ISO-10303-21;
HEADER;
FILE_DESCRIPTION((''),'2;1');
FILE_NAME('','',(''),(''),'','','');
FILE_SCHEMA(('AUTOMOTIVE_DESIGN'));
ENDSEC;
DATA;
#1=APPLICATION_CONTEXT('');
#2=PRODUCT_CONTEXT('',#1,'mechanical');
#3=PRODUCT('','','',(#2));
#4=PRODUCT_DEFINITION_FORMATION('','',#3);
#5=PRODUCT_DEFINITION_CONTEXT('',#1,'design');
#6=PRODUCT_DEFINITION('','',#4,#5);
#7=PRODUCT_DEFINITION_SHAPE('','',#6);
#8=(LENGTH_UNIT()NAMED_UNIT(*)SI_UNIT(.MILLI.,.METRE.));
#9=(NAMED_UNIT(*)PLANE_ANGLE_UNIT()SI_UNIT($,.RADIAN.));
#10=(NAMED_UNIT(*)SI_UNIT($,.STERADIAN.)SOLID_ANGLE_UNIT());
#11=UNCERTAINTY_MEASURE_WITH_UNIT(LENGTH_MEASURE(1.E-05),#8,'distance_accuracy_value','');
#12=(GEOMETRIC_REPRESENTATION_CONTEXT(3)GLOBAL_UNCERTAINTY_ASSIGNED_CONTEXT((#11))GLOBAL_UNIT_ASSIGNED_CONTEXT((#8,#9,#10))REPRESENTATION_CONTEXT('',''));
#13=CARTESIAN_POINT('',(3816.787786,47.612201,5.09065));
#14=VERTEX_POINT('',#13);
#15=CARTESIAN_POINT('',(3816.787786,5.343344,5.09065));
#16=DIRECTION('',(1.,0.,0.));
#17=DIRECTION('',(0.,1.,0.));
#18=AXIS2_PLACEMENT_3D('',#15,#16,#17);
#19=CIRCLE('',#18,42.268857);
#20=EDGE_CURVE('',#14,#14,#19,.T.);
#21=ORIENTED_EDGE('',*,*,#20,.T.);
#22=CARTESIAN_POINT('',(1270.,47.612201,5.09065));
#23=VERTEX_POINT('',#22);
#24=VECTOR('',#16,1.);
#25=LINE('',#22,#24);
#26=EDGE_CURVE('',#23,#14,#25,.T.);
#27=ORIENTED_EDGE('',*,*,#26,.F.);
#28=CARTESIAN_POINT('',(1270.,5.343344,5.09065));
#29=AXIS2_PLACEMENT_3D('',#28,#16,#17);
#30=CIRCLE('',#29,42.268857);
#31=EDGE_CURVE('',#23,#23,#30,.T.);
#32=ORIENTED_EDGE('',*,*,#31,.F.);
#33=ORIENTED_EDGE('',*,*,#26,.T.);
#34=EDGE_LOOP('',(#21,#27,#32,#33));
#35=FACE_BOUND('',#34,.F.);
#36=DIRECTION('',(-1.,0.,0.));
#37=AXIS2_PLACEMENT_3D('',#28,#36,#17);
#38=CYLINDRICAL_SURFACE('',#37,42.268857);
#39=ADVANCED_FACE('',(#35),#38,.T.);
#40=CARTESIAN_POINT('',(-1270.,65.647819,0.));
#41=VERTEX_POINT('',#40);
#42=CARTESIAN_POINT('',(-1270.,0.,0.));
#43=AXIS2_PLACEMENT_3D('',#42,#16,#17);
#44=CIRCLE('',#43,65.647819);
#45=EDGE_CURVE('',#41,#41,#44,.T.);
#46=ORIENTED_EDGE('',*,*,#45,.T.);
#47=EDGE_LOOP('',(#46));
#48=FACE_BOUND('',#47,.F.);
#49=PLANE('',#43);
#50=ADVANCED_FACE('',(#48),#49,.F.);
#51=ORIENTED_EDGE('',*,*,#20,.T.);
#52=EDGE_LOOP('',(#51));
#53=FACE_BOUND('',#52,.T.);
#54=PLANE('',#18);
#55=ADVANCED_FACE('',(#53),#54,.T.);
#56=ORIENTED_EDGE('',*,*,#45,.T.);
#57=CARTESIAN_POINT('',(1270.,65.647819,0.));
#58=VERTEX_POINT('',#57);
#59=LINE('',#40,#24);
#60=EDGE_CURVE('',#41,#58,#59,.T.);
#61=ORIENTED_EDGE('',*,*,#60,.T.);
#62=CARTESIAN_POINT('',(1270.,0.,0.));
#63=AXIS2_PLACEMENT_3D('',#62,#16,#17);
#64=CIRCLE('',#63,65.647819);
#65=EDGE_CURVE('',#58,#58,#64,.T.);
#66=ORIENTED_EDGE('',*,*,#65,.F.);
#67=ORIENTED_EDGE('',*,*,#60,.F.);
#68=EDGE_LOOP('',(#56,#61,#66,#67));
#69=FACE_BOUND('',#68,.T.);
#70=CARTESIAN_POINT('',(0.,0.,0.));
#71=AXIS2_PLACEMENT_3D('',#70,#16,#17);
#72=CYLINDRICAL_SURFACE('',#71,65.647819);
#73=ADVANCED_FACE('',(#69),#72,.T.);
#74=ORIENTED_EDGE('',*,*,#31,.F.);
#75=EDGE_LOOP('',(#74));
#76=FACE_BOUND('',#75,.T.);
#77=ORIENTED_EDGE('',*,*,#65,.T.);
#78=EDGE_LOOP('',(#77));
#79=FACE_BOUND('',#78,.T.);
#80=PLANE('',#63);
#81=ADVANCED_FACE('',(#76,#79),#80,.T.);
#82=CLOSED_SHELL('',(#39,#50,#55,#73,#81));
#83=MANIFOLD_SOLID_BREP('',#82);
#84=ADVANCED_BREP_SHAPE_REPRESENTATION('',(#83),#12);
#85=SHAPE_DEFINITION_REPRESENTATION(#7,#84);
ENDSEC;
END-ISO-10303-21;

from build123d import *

# Parameters (mm, degrees)
F0_R     = 65.6478190294
F1_DEPTH = 1270
F2_R     = 42.2688566602
F3_DEPTH = 2546.7877856


# Not quite as in the source:
# - an extrude ends at something that could not be found from the text; its depth is read off the source's solid


with BuildPart() as f1:
    # F0 (on Right) → F1 (new body, symmetric)
    with BuildSketch(Plane.YZ):
        Circle(F0_R)
    extrude(amount=F1_DEPTH, both=True)

    # F2 (on face) → F3 (join, through all)
    with BuildSketch(Plane.YZ.offset(1270)):
        with Locations((5.3433440626, 5.0906497054)):
            Circle(F2_R)
    extrude(amount=F3_DEPTH)


solid = f1.part
